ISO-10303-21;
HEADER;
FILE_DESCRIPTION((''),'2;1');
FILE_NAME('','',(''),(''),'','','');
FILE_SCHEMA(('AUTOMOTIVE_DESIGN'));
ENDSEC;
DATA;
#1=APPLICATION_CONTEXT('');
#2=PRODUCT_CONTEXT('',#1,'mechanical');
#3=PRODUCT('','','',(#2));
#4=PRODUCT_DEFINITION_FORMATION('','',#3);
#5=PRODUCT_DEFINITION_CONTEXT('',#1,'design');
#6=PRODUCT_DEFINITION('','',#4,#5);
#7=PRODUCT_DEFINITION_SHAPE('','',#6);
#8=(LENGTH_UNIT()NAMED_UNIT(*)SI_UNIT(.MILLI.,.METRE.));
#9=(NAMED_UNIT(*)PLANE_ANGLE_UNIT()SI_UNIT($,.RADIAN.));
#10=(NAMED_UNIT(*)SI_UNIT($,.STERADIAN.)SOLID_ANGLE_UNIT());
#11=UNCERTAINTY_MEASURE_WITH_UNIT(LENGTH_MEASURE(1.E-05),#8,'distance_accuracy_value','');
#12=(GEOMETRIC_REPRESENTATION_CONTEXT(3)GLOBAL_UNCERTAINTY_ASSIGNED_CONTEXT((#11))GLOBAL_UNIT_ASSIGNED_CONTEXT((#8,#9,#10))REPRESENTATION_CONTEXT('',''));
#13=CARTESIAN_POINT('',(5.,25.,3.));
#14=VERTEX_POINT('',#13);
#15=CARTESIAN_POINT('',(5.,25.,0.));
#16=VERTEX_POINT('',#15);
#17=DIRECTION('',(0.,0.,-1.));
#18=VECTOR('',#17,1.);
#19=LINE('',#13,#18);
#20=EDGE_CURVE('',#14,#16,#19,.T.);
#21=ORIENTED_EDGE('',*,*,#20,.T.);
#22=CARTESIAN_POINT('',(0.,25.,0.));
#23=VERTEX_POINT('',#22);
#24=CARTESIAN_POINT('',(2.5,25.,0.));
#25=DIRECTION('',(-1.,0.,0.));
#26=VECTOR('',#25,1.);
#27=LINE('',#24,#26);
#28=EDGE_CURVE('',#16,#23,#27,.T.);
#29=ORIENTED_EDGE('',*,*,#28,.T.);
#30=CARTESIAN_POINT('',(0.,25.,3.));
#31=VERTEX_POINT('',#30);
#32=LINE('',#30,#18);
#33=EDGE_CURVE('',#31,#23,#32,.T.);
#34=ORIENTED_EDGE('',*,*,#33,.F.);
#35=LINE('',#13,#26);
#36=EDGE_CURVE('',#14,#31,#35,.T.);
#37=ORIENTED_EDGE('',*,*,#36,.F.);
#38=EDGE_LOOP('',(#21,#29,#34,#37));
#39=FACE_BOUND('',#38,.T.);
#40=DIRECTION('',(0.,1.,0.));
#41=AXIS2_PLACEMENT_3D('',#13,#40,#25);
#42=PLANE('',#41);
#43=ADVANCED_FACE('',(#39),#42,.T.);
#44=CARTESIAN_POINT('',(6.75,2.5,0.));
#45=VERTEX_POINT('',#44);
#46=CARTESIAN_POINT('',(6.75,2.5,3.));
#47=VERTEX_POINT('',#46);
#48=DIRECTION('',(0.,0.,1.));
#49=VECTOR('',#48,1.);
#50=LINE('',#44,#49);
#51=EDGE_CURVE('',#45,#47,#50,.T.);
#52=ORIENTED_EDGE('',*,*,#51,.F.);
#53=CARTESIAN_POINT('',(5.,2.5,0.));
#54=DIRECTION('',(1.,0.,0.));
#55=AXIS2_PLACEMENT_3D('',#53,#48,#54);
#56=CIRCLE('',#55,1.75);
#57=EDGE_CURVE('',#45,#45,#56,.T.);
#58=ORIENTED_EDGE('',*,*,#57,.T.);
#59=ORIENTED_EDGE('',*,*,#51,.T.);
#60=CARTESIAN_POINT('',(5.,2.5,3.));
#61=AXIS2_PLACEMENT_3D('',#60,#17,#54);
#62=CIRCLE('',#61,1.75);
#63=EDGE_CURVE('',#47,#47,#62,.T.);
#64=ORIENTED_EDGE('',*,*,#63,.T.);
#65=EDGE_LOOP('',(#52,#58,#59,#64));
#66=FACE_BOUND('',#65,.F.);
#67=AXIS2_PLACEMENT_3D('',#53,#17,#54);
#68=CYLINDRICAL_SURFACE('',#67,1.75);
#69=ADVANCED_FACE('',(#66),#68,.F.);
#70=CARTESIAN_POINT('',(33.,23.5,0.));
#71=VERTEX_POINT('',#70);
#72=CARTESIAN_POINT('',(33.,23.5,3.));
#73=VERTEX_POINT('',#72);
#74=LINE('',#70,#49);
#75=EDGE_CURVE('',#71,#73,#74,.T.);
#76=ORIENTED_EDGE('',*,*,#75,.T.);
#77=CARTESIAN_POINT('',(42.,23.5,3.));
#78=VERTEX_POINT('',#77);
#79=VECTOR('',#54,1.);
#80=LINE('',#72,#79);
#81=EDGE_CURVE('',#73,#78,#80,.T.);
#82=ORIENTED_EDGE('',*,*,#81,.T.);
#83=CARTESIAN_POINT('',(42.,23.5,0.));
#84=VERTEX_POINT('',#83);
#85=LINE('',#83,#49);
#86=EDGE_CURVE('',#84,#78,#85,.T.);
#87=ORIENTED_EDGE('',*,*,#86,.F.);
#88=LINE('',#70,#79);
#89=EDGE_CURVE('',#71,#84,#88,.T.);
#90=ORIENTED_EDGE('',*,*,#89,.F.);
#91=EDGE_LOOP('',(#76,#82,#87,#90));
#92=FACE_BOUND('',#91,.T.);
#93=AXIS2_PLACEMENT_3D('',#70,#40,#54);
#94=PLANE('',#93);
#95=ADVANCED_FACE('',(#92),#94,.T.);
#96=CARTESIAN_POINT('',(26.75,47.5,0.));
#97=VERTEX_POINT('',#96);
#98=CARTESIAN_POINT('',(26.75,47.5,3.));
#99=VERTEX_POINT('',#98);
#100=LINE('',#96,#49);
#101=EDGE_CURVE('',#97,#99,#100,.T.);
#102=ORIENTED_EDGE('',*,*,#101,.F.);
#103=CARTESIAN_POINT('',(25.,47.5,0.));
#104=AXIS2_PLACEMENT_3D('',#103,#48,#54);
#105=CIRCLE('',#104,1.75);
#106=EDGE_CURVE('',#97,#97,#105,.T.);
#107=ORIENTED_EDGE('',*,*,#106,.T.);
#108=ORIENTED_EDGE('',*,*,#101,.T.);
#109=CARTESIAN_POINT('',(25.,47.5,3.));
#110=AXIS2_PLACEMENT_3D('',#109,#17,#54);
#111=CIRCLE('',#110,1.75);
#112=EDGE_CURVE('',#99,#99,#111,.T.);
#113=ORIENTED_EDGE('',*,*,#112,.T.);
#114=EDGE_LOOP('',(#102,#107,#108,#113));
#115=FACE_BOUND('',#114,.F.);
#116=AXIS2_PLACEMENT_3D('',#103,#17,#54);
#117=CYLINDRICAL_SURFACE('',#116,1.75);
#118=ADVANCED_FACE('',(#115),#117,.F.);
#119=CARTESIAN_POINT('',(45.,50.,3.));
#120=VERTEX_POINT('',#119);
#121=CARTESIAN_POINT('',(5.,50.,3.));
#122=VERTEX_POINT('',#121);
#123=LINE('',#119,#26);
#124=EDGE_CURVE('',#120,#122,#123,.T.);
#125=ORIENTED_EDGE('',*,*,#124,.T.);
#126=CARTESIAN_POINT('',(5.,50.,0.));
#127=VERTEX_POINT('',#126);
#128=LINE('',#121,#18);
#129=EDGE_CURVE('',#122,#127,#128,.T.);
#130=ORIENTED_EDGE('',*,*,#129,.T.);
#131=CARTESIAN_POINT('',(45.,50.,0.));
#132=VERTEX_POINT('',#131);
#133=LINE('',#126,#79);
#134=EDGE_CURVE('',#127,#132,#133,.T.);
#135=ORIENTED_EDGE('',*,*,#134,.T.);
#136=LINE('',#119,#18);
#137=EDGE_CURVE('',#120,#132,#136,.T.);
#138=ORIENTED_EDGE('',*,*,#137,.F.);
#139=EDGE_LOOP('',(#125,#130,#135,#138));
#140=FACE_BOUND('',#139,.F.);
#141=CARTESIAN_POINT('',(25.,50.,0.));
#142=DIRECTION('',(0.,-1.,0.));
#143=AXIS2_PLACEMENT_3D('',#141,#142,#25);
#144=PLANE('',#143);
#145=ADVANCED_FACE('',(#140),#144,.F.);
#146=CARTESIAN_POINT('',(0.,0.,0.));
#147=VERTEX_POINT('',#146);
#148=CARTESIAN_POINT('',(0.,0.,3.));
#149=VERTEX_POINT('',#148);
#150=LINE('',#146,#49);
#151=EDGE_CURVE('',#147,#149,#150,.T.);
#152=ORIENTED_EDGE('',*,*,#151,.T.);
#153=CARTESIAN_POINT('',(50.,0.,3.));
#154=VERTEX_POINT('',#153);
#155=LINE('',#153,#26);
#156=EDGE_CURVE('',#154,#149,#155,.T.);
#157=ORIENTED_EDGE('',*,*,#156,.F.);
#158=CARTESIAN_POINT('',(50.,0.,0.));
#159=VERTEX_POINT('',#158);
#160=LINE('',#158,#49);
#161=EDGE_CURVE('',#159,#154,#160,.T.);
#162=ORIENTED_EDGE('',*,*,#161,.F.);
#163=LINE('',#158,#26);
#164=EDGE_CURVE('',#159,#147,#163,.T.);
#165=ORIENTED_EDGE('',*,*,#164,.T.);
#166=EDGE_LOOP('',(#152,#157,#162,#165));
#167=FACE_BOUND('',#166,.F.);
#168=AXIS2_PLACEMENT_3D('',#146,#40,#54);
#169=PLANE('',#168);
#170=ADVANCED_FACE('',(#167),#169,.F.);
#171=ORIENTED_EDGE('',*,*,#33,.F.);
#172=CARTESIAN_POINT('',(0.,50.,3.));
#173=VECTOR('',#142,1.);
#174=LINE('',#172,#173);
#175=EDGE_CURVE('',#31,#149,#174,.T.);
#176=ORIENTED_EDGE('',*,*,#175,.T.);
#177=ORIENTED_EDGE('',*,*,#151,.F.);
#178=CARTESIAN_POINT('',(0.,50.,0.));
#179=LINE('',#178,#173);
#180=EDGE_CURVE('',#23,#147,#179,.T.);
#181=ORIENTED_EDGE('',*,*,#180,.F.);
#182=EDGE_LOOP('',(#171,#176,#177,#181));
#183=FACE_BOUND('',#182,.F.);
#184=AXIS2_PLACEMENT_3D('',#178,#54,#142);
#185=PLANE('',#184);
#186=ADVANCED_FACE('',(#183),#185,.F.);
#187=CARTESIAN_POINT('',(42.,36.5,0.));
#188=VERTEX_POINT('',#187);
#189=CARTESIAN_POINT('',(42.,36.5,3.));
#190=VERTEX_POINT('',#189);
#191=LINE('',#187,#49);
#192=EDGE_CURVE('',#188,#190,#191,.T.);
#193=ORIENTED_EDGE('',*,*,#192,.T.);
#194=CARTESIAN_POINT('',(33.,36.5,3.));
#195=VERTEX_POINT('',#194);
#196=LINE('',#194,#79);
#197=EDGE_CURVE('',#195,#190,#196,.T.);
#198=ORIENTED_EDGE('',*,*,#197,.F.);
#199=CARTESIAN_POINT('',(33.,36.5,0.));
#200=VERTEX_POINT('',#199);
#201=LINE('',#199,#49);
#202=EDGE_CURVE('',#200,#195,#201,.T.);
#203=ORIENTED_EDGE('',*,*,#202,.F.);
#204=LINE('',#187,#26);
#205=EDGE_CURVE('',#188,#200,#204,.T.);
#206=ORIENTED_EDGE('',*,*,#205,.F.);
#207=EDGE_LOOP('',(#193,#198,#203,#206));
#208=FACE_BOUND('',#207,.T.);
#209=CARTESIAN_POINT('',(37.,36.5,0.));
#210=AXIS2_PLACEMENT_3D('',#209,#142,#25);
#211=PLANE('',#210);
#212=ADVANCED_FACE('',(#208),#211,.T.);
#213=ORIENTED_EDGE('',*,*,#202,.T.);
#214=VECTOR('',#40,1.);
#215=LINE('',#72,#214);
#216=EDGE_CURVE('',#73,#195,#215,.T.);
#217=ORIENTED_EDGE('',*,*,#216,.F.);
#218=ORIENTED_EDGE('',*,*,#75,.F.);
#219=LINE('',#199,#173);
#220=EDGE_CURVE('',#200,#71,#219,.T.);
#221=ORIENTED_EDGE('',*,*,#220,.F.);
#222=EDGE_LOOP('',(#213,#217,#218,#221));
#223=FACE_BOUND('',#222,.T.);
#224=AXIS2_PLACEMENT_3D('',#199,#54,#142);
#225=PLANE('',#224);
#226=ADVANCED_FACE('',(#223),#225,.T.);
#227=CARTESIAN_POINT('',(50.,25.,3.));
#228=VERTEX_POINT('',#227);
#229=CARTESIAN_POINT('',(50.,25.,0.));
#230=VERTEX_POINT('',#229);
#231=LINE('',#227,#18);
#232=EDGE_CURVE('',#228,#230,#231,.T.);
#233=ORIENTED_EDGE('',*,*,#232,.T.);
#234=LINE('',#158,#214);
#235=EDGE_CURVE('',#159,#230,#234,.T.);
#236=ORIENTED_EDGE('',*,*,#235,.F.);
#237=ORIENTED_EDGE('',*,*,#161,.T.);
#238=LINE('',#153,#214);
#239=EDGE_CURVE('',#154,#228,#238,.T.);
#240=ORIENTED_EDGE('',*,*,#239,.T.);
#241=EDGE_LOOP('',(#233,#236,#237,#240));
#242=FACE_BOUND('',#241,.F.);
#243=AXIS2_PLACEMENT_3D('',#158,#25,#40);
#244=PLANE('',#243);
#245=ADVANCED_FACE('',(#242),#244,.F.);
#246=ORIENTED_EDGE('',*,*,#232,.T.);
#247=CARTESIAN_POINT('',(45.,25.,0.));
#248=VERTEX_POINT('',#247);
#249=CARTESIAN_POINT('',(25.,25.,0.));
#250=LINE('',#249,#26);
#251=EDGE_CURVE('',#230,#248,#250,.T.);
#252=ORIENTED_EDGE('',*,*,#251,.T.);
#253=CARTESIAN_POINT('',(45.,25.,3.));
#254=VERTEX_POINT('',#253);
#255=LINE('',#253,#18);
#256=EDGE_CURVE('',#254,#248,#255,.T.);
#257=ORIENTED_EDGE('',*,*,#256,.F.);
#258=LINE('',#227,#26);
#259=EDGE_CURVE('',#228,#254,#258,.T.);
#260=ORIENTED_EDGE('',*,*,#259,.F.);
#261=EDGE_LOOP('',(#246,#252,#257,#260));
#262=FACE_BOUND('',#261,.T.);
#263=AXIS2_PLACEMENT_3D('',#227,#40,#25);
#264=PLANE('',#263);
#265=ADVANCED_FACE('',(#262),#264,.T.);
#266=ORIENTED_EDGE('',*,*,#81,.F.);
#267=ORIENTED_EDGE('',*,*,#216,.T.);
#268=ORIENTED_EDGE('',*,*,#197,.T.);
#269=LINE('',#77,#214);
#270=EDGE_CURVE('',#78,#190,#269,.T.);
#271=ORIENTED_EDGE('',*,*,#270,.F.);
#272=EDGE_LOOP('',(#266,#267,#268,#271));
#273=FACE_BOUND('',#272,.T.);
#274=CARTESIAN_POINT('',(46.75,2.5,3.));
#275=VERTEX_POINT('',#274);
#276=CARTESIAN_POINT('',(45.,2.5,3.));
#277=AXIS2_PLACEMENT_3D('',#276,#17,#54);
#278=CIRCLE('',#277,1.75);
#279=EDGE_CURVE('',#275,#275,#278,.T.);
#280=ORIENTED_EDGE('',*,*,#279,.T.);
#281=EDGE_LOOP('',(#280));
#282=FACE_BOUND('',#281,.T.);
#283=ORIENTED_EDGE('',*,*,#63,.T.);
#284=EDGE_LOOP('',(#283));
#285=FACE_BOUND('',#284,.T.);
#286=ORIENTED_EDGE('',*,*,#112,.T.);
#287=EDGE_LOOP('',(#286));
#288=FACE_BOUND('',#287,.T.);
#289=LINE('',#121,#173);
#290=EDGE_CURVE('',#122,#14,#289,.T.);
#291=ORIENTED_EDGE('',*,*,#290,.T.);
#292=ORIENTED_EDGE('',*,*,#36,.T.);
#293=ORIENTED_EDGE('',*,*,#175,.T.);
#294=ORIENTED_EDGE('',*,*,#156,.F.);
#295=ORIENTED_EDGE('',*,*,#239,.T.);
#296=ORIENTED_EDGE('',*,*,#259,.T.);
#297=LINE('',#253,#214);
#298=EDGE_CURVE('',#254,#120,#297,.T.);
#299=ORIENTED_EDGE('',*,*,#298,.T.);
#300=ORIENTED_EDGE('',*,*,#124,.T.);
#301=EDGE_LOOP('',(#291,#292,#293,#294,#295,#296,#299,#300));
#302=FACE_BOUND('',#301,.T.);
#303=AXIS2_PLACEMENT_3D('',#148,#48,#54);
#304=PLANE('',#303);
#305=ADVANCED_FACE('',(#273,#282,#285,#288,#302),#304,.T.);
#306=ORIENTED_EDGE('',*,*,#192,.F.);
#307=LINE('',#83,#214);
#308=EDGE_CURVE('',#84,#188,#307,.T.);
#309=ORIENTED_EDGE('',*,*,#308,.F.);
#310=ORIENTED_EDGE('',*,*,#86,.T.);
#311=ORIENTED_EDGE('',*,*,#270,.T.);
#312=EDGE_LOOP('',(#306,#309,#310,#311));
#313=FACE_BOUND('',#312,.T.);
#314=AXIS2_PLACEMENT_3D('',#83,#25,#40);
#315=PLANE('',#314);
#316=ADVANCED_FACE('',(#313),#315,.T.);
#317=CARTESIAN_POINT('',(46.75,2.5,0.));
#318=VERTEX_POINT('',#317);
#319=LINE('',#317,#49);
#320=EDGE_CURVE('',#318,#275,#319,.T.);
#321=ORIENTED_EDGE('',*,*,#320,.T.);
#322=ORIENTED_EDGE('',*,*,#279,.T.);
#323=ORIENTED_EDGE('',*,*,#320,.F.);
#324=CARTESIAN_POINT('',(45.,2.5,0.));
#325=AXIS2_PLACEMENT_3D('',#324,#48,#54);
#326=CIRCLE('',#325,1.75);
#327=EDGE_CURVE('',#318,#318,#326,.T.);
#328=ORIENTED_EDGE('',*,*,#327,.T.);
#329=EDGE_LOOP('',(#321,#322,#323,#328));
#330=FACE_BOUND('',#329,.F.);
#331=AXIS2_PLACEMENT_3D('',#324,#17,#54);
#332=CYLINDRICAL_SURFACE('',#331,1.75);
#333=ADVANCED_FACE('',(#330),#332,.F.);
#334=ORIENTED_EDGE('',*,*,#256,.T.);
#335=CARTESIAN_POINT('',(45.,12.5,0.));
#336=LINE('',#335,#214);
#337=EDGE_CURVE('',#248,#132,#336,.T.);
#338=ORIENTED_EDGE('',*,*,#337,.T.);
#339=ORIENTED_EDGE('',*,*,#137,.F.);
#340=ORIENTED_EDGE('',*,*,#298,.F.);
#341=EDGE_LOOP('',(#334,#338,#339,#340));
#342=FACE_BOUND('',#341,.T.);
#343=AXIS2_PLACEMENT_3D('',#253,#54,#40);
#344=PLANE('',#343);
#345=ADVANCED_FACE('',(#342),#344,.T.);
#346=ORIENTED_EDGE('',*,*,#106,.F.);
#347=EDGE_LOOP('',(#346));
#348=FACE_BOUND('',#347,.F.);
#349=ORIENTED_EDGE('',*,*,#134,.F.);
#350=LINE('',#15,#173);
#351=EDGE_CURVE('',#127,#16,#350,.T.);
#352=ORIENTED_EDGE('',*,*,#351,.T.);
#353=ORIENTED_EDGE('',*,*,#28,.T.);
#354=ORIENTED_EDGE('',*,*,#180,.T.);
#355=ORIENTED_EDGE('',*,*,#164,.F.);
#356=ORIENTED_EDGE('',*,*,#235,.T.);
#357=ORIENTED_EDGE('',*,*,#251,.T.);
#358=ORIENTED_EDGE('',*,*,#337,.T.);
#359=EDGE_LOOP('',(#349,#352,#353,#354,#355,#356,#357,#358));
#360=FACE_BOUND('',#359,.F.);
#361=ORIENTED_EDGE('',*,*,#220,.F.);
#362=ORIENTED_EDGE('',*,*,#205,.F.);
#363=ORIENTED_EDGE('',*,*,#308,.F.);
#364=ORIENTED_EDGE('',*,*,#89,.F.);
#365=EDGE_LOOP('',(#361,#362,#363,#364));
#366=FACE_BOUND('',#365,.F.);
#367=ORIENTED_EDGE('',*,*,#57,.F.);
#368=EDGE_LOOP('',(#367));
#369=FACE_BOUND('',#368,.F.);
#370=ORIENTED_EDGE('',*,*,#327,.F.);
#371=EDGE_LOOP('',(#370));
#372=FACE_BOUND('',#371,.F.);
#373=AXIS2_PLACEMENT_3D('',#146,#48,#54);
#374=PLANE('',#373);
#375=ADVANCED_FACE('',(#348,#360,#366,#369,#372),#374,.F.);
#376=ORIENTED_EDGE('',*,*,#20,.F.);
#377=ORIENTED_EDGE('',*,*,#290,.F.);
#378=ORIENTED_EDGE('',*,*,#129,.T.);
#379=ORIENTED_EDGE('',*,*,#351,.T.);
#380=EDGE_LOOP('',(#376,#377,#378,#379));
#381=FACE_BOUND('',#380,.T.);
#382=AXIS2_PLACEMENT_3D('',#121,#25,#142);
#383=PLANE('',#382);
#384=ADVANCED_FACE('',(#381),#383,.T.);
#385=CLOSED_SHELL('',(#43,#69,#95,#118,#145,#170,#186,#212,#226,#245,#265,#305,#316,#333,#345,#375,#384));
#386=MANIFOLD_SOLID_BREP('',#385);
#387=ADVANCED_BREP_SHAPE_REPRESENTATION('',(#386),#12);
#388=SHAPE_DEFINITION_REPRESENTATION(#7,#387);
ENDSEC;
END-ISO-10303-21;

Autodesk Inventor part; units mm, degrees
ref_plane "YZ Plane" through (0, 0, 0) normal (1, 0, 0) x (0, 1, 0)
ref_plane "XZ Plane" through (0, 0, 0) normal (0, 1, 0) x (-1, 0, 0)
ref_plane "XY Plane" through (0, 0, 0) normal (0, 0, 1) x (1, 0, 0)
sketch "Sketch1" plane through (0, 0, 0) normal (0, 0, 1) x (1, 0, 0)
  line L0 (0, 0) -> (50, 0)
  line L1 (50, 0) -> (50, 50)
  line L2 (50, 50) -> (0, 50)
  line L3 (0, 50) -> (0, 0)
  line L4 (25, 50) -> (25, 47.5)
  line L5 (0, 0) -> (5, 0)
  line L6 (5, 0) -> (5, 2.5)
  line L7 (50, 0) -> (45, 0)
  line L8 (45, 0) -> (45, 2.5)
  circle A0 centre (5, 2.5) radius 1.75
  circle A1 centre (45, 2.5) radius 1.75
  circle A2 centre (25, 47.5) radius 1.75
  line L9 (50, 50) -> (37, 50)
  line L10 (37, 50) -> (37, 30)
  line L11 (37, 30) -> (33, 30)
  line L12 (33, 30) -> (33, 23.5)
  line L13 (33, 23.5) -> (42, 23.5)
  line L14 (42, 23.5) -> (42, 36.5)
  line L15 (42, 36.5) -> (33, 36.5)
  line L16 (33, 36.5) -> (33, 30)
  dimension "d0" = 50
  dimension "d1" = 50
  dimension "d2" = 2.5
  dimension "d3" = 5
  dimension "d4" = 2.5
  dimension "d5" = 5
  dimension "d6" = 2.5
  dimension "d7" = 3.5
  dimension "d8" = 3.5
  dimension "d9" = 3.5
  dimension "d18" = 13
  dimension "d19" = 20
  dimension "d20" = 4
  dimension "d21" = 6.5
  dimension "d22" = 9
  dimension "d23" = 13
  dimension "d24" = 9
extrude "Extrusion1" add sketch "Sketch1" along normal blind 3
sketch "Sketch2" plane through (0, 0, 3) normal (0, 0, 1) x (1, 0, 0)
  line L0 (50, 50) -> (0, 50) projected
  line L1 (0, 50) -> (5, 50)
  line L2 (5, 50) -> (5, 25)
  line L3 (5, 25) -> (0, 25)
  line L4 (0, 50) -> (0, 0) projected
  line L5 (0, 25) -> (0, 50)
  line L6 (0, 50) -> (0, 25)
  line L7 (50, 0) -> (50, 50) projected
  line L8 (50, 50) -> (50, 25)
  line L9 (50, 25) -> (45, 25)
  line L10 (45, 25) -> (45, 50)
  line L11 (45, 50) -> (50, 50)
  dimension "d12" = 5
  dimension "d13" = 25
  dimension "d14" = 25
  dimension "d15" = 5
extrude "Extrusion2" cut sketch "Sketch2" against normal through all
properties part number "arm_0_bottom_case"
